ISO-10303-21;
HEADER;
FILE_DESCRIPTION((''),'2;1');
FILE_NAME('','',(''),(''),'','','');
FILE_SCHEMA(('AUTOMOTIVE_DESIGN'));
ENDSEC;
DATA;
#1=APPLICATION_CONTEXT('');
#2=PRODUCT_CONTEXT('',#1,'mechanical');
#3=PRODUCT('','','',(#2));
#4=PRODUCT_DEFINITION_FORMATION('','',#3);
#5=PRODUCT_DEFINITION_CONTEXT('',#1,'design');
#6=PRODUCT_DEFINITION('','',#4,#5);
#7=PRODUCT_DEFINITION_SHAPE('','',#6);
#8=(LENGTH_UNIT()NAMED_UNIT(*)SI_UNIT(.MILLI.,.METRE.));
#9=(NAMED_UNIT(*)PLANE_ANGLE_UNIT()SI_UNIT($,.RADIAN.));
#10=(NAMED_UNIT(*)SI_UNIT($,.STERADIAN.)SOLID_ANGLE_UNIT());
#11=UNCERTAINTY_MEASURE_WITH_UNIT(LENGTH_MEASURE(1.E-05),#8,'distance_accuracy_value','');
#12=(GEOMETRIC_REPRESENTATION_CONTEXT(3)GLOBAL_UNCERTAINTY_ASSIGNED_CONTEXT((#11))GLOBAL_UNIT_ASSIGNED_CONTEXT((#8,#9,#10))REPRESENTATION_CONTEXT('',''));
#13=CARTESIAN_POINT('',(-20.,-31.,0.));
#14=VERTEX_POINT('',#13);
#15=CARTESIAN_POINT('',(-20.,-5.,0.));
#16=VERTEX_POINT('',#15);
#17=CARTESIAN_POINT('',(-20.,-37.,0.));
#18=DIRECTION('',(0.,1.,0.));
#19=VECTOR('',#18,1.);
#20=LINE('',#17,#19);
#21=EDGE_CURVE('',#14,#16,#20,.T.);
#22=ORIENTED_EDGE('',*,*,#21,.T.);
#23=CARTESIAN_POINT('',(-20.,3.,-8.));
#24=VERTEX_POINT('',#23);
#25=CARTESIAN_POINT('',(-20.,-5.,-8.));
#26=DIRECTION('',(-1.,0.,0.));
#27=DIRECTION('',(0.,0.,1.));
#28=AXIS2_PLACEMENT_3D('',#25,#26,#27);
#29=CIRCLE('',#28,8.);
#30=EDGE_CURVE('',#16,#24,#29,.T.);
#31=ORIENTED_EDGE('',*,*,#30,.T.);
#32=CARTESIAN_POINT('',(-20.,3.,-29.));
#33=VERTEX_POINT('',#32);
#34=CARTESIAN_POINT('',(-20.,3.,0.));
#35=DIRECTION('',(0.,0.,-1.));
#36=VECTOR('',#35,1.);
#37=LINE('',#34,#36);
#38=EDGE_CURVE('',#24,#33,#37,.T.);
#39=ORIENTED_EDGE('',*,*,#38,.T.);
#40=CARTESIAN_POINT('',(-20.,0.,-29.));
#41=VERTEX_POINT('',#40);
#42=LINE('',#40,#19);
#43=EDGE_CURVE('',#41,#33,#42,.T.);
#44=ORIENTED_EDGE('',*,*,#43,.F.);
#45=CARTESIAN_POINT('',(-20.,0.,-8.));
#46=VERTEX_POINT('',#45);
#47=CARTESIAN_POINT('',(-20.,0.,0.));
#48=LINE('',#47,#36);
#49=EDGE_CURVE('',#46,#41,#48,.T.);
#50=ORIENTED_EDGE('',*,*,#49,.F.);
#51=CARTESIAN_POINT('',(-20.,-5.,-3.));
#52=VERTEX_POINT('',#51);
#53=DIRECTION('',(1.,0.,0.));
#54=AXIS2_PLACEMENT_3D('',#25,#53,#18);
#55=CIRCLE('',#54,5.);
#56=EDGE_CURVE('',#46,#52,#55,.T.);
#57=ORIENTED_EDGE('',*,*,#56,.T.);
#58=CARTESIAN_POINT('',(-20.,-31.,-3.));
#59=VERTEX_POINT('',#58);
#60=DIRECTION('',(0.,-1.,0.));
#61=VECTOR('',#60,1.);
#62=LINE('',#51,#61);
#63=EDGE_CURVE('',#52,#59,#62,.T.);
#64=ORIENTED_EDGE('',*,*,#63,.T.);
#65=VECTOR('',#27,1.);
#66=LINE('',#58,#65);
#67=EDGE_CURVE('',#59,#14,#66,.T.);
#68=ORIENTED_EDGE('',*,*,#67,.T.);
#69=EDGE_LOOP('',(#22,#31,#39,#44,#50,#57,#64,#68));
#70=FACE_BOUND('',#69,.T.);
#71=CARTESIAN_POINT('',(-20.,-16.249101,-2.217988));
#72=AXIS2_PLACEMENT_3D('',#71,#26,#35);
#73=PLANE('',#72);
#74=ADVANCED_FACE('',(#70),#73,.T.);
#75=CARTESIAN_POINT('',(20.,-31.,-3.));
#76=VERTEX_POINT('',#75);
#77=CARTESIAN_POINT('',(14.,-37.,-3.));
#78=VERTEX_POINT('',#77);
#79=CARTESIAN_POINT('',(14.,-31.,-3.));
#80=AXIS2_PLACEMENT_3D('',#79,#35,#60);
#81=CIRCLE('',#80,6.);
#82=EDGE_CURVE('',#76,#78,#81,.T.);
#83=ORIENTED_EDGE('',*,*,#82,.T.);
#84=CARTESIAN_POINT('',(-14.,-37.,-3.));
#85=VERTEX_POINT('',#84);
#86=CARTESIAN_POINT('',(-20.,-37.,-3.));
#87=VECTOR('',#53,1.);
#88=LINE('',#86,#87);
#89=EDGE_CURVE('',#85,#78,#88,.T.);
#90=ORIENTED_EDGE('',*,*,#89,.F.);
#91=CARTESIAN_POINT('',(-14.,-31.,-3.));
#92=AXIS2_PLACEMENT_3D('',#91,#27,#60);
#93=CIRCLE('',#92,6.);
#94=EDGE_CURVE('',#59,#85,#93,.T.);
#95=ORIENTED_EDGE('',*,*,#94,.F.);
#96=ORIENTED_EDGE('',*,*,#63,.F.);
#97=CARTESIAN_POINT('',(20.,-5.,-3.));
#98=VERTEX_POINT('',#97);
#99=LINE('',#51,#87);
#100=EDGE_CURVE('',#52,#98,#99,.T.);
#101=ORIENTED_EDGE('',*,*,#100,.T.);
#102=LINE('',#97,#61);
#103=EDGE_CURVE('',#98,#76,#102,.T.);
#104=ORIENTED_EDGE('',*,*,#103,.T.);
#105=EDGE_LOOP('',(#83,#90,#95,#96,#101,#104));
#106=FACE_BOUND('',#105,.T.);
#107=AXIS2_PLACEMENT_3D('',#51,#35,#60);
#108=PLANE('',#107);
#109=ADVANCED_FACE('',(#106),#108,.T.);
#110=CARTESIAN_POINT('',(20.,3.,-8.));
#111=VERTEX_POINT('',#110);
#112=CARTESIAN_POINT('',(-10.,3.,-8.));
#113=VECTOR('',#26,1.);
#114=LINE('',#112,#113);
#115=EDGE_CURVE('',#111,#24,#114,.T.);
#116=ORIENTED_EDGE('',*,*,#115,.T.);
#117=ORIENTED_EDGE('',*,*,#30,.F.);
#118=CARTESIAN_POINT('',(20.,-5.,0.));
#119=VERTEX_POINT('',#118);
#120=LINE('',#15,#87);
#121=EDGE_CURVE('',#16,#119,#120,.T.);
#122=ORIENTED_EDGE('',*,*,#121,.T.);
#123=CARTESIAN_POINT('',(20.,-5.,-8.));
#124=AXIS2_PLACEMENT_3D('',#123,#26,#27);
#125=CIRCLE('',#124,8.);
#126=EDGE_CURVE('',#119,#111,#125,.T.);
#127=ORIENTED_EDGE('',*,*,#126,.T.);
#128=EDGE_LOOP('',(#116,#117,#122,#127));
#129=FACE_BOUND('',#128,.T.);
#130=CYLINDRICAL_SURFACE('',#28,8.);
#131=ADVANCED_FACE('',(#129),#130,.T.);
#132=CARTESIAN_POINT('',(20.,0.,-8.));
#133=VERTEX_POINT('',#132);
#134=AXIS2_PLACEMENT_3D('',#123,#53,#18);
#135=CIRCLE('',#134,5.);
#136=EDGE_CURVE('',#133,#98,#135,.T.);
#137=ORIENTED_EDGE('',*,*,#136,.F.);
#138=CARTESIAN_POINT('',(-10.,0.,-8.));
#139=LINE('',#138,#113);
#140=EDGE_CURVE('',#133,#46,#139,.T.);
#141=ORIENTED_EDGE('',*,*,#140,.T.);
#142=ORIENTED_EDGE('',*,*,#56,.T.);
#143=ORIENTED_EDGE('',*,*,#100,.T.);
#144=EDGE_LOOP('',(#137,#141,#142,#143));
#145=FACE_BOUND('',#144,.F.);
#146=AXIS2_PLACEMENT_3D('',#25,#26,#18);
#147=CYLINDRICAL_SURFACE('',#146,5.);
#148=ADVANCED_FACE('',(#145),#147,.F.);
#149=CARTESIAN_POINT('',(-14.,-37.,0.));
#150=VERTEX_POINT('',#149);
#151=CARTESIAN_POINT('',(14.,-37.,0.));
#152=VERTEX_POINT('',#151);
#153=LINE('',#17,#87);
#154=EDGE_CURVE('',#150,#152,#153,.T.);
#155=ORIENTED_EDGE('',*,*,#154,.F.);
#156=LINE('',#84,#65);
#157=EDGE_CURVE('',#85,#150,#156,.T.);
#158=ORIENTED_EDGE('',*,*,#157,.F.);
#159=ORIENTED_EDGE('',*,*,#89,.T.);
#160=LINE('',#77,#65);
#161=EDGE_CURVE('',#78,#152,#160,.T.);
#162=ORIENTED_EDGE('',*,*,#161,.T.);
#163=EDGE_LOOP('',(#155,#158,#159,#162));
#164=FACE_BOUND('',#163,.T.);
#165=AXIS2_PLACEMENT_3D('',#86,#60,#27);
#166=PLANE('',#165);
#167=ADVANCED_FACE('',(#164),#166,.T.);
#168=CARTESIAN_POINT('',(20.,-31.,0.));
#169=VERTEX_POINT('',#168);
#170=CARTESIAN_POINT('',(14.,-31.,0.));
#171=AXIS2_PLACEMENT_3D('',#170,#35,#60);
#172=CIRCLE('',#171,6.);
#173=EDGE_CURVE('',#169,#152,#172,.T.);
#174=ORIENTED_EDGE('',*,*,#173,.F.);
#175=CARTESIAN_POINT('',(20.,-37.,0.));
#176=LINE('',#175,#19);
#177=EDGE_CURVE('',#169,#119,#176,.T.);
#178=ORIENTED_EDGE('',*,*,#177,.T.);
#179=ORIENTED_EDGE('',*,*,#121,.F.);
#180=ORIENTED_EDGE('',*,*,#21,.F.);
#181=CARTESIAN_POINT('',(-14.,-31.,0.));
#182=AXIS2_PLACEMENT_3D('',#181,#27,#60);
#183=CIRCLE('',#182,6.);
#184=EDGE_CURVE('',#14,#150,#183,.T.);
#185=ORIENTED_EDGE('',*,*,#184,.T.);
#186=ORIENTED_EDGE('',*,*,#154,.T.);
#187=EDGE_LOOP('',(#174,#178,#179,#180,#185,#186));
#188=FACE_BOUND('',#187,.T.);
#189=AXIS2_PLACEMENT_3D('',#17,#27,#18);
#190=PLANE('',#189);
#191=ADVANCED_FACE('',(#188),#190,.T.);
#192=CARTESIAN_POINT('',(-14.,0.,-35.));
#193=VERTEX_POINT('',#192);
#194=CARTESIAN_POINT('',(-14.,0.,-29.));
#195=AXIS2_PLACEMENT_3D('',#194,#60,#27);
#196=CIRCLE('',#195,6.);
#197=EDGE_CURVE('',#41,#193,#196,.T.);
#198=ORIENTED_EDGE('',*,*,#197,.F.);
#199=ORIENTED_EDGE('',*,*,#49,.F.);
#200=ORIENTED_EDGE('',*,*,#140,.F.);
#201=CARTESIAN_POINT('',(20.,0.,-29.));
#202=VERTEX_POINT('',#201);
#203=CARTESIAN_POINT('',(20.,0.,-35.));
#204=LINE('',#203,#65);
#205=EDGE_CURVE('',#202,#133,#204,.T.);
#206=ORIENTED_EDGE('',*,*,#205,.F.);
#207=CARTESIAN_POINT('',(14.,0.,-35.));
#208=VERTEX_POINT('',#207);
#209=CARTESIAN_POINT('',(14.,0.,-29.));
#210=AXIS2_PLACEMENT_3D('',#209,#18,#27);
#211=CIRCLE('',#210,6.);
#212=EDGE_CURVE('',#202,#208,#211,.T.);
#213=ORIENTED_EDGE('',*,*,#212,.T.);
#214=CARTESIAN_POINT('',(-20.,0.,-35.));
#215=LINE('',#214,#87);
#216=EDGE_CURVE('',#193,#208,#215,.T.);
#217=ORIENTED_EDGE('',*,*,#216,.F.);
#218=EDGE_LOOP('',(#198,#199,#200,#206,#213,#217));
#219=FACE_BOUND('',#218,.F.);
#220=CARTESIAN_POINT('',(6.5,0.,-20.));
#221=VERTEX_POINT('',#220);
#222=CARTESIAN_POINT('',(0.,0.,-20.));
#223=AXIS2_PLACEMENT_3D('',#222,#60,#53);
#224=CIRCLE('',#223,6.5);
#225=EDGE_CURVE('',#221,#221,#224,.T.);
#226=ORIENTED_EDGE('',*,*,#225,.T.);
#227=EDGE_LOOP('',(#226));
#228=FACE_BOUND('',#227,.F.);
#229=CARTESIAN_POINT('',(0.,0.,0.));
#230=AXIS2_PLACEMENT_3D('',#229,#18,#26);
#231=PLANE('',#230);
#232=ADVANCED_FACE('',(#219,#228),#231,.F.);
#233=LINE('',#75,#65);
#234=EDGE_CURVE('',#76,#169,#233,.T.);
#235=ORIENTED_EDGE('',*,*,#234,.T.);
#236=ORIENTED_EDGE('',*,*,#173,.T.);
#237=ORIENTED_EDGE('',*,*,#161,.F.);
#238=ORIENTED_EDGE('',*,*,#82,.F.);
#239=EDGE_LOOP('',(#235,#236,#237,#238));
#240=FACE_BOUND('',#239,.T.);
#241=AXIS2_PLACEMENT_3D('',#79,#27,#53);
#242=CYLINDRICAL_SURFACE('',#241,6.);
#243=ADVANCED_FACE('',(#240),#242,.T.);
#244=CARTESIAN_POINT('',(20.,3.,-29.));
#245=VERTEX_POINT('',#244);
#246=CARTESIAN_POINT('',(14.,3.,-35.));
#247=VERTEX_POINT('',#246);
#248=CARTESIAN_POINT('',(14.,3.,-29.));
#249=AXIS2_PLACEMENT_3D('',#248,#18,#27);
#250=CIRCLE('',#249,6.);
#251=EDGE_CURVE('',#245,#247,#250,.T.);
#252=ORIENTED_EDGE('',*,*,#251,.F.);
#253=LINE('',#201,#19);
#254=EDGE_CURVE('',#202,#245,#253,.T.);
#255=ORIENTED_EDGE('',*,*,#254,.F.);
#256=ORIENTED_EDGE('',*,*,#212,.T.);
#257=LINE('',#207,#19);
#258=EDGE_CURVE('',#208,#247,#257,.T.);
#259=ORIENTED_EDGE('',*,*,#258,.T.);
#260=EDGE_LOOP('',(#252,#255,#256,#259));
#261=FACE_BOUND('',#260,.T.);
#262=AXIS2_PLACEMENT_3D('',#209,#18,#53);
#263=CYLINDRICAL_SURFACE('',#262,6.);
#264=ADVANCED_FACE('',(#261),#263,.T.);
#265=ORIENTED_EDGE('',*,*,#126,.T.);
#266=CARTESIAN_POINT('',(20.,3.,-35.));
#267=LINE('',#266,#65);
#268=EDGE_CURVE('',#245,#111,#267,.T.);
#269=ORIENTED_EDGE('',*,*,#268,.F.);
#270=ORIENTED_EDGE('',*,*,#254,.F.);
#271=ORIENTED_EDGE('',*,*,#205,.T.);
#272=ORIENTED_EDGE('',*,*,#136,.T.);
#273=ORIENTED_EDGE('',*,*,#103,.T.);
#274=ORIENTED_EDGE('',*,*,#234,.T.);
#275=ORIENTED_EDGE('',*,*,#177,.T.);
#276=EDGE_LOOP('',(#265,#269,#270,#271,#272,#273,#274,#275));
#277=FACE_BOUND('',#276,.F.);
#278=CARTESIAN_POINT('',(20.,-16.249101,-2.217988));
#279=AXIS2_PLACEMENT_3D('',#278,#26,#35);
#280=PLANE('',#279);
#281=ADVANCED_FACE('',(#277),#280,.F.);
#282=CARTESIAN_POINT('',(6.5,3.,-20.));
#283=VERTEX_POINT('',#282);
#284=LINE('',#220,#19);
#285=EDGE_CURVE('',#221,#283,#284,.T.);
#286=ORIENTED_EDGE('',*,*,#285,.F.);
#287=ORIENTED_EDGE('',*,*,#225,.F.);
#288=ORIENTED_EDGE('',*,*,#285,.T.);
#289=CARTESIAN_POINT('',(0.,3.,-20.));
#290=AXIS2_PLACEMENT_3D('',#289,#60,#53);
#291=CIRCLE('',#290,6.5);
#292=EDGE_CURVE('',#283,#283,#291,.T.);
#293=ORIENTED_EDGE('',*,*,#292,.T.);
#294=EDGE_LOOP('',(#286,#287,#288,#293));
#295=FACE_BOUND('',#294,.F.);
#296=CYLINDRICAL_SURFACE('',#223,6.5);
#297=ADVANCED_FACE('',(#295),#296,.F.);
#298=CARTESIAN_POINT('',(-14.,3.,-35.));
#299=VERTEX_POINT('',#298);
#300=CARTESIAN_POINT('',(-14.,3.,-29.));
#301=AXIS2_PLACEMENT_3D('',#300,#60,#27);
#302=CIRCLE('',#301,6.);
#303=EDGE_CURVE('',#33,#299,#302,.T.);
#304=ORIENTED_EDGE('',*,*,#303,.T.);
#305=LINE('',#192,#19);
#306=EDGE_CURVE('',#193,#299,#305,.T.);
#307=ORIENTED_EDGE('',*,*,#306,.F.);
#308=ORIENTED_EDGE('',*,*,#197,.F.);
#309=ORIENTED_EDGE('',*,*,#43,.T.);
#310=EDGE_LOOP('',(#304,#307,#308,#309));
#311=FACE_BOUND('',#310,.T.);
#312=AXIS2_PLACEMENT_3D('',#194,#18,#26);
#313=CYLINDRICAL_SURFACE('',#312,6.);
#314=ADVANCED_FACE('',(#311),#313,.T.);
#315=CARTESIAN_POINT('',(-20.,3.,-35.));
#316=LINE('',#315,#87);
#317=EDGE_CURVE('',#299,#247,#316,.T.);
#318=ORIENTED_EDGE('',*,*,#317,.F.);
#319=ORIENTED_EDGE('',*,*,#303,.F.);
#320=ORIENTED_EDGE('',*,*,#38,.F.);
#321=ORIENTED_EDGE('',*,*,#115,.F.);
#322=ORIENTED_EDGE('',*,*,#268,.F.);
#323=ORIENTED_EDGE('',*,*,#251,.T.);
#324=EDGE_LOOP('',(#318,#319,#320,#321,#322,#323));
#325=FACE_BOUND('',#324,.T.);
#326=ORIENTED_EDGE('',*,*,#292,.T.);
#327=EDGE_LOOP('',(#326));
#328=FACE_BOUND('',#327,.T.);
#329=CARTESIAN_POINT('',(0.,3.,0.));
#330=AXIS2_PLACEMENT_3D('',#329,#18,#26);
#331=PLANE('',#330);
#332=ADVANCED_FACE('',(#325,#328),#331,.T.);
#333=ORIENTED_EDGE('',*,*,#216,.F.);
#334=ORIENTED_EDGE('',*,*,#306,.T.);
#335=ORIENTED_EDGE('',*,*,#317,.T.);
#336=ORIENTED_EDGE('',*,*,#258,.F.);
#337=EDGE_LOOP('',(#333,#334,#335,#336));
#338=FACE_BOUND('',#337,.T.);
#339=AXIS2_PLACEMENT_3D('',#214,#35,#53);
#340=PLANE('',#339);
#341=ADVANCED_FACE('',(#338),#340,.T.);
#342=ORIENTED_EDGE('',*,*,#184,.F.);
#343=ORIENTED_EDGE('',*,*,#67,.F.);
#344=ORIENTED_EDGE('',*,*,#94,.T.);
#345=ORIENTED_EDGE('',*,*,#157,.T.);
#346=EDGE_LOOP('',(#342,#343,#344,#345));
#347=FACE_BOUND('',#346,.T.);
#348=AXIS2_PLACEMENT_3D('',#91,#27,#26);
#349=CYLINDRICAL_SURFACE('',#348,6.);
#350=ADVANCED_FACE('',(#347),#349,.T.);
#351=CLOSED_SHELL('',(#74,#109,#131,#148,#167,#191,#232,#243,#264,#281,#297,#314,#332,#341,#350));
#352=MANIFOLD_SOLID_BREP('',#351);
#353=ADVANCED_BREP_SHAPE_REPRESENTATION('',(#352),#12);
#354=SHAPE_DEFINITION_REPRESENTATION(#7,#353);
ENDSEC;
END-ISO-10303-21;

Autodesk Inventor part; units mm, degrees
ref_plane "YZ Plane" through (0, 0, 0) normal (1, 0, 0) x (0, 1, 0)
ref_plane "XZ Plane" through (0, 0, 0) normal (0, 1, 0) x (-1, 0, 0)
ref_plane "XY Plane" through (0, 0, 0) normal (0, 0, 1) x (1, 0, 0)
sketch "Sketch4" plane through (0, 0, 0) normal (0, 1, 0) x (-1, 0, 0)
  line L0 (20, -35) -> (-20, -35)
  line L1 (-20, -35) -> (-20, 0)
  line L2 (-20, 0) -> (20, 0)
  line L3 (20, 0) -> (20, -35)
  point P0 (0, 0)
  point P1 (0, 0)
  dimension "d36" = 40
  dimension "d37" = 35
extrude "Plate2" add sketch "Sketch4" along normal blind 3
sketch "Sketch5" plane through (0, 0, 0) normal (0, -1, 0) x (1, 0, 0)
  circle A0 centre (0, -20) radius 6.5
  line L0 (0, 0) -> (0, -35) construction
  line L1 (20, -35) -> (-20, -35) construction
  dimension "d40" = 15
  dimension "d41" = 13
extrude "Cut1" cut sketch "Sketch5" against normal blind 3
sketch "Sketch6" plane through (-20, 3, -3) normal (0, 0, 1) x (1, 0, 0)
  line L0 (40, 0) -> (0, 0)
  line L1 (0, 0) -> (0, -40)
  line L2 (0, -40) -> (40, -40)
  line L3 (40, -40) -> (40, 0)
edge flange "Flange1" height 40 angle 90 thickness 3 bend radius 5 thickness toward (0, 0, 1) relief round relief width 3 relief depth 1.5 edges at (0, 0, 0) wall of the first edge with corners at (20, 3, -3) (-20, 3, -3) (-20, -37, -3) (20, -37, -3)
bend "Bend1"
corner "Corner1"
fillet "Corner Round6" radius 6 4 edges at (20, -37, -1.5) (-20, 1.5, -35) (20, 1.5, -35) (-20, -37, -1.5)
equation "\"d42\" = Thickness"
equation "\"d38\" = Thickness"
equation "\"d44\" = BendReliefWidth"
equation "\"d45\" = BendReliefDepth"
equation "\"d46\" = MinimumRemnant"
equation "\"d47\" = TransitionRadius"
equation "\"d50\" = BendRadius"
equation "\"d51\" = CornerReliefSize"
equation "\"d52\" = GapSize"
equation "\"d53\" = JacobiRadiusSize"
equation "\"BendReliefWidth\" = Thickness"
equation "\"BendReliefDepth\" = 0.5 * Thickness"
equation "\"CornerReliefSize\" = 4 * Thickness"
equation "\"MinimumRemnant\" = 2 * Thickness"
equation "\"TransitionRadius\" = BendRadius"
equation "\"JacobiRadiusSize\" = BendRadius"
equation "\"GapSize\" = Thickness"
equation "\"Thickness\" = 3"
equation "\"BendRadius\" = 5"
properties part number "NDM-VOS 913 flange bolt" material "Stainless Steel"
